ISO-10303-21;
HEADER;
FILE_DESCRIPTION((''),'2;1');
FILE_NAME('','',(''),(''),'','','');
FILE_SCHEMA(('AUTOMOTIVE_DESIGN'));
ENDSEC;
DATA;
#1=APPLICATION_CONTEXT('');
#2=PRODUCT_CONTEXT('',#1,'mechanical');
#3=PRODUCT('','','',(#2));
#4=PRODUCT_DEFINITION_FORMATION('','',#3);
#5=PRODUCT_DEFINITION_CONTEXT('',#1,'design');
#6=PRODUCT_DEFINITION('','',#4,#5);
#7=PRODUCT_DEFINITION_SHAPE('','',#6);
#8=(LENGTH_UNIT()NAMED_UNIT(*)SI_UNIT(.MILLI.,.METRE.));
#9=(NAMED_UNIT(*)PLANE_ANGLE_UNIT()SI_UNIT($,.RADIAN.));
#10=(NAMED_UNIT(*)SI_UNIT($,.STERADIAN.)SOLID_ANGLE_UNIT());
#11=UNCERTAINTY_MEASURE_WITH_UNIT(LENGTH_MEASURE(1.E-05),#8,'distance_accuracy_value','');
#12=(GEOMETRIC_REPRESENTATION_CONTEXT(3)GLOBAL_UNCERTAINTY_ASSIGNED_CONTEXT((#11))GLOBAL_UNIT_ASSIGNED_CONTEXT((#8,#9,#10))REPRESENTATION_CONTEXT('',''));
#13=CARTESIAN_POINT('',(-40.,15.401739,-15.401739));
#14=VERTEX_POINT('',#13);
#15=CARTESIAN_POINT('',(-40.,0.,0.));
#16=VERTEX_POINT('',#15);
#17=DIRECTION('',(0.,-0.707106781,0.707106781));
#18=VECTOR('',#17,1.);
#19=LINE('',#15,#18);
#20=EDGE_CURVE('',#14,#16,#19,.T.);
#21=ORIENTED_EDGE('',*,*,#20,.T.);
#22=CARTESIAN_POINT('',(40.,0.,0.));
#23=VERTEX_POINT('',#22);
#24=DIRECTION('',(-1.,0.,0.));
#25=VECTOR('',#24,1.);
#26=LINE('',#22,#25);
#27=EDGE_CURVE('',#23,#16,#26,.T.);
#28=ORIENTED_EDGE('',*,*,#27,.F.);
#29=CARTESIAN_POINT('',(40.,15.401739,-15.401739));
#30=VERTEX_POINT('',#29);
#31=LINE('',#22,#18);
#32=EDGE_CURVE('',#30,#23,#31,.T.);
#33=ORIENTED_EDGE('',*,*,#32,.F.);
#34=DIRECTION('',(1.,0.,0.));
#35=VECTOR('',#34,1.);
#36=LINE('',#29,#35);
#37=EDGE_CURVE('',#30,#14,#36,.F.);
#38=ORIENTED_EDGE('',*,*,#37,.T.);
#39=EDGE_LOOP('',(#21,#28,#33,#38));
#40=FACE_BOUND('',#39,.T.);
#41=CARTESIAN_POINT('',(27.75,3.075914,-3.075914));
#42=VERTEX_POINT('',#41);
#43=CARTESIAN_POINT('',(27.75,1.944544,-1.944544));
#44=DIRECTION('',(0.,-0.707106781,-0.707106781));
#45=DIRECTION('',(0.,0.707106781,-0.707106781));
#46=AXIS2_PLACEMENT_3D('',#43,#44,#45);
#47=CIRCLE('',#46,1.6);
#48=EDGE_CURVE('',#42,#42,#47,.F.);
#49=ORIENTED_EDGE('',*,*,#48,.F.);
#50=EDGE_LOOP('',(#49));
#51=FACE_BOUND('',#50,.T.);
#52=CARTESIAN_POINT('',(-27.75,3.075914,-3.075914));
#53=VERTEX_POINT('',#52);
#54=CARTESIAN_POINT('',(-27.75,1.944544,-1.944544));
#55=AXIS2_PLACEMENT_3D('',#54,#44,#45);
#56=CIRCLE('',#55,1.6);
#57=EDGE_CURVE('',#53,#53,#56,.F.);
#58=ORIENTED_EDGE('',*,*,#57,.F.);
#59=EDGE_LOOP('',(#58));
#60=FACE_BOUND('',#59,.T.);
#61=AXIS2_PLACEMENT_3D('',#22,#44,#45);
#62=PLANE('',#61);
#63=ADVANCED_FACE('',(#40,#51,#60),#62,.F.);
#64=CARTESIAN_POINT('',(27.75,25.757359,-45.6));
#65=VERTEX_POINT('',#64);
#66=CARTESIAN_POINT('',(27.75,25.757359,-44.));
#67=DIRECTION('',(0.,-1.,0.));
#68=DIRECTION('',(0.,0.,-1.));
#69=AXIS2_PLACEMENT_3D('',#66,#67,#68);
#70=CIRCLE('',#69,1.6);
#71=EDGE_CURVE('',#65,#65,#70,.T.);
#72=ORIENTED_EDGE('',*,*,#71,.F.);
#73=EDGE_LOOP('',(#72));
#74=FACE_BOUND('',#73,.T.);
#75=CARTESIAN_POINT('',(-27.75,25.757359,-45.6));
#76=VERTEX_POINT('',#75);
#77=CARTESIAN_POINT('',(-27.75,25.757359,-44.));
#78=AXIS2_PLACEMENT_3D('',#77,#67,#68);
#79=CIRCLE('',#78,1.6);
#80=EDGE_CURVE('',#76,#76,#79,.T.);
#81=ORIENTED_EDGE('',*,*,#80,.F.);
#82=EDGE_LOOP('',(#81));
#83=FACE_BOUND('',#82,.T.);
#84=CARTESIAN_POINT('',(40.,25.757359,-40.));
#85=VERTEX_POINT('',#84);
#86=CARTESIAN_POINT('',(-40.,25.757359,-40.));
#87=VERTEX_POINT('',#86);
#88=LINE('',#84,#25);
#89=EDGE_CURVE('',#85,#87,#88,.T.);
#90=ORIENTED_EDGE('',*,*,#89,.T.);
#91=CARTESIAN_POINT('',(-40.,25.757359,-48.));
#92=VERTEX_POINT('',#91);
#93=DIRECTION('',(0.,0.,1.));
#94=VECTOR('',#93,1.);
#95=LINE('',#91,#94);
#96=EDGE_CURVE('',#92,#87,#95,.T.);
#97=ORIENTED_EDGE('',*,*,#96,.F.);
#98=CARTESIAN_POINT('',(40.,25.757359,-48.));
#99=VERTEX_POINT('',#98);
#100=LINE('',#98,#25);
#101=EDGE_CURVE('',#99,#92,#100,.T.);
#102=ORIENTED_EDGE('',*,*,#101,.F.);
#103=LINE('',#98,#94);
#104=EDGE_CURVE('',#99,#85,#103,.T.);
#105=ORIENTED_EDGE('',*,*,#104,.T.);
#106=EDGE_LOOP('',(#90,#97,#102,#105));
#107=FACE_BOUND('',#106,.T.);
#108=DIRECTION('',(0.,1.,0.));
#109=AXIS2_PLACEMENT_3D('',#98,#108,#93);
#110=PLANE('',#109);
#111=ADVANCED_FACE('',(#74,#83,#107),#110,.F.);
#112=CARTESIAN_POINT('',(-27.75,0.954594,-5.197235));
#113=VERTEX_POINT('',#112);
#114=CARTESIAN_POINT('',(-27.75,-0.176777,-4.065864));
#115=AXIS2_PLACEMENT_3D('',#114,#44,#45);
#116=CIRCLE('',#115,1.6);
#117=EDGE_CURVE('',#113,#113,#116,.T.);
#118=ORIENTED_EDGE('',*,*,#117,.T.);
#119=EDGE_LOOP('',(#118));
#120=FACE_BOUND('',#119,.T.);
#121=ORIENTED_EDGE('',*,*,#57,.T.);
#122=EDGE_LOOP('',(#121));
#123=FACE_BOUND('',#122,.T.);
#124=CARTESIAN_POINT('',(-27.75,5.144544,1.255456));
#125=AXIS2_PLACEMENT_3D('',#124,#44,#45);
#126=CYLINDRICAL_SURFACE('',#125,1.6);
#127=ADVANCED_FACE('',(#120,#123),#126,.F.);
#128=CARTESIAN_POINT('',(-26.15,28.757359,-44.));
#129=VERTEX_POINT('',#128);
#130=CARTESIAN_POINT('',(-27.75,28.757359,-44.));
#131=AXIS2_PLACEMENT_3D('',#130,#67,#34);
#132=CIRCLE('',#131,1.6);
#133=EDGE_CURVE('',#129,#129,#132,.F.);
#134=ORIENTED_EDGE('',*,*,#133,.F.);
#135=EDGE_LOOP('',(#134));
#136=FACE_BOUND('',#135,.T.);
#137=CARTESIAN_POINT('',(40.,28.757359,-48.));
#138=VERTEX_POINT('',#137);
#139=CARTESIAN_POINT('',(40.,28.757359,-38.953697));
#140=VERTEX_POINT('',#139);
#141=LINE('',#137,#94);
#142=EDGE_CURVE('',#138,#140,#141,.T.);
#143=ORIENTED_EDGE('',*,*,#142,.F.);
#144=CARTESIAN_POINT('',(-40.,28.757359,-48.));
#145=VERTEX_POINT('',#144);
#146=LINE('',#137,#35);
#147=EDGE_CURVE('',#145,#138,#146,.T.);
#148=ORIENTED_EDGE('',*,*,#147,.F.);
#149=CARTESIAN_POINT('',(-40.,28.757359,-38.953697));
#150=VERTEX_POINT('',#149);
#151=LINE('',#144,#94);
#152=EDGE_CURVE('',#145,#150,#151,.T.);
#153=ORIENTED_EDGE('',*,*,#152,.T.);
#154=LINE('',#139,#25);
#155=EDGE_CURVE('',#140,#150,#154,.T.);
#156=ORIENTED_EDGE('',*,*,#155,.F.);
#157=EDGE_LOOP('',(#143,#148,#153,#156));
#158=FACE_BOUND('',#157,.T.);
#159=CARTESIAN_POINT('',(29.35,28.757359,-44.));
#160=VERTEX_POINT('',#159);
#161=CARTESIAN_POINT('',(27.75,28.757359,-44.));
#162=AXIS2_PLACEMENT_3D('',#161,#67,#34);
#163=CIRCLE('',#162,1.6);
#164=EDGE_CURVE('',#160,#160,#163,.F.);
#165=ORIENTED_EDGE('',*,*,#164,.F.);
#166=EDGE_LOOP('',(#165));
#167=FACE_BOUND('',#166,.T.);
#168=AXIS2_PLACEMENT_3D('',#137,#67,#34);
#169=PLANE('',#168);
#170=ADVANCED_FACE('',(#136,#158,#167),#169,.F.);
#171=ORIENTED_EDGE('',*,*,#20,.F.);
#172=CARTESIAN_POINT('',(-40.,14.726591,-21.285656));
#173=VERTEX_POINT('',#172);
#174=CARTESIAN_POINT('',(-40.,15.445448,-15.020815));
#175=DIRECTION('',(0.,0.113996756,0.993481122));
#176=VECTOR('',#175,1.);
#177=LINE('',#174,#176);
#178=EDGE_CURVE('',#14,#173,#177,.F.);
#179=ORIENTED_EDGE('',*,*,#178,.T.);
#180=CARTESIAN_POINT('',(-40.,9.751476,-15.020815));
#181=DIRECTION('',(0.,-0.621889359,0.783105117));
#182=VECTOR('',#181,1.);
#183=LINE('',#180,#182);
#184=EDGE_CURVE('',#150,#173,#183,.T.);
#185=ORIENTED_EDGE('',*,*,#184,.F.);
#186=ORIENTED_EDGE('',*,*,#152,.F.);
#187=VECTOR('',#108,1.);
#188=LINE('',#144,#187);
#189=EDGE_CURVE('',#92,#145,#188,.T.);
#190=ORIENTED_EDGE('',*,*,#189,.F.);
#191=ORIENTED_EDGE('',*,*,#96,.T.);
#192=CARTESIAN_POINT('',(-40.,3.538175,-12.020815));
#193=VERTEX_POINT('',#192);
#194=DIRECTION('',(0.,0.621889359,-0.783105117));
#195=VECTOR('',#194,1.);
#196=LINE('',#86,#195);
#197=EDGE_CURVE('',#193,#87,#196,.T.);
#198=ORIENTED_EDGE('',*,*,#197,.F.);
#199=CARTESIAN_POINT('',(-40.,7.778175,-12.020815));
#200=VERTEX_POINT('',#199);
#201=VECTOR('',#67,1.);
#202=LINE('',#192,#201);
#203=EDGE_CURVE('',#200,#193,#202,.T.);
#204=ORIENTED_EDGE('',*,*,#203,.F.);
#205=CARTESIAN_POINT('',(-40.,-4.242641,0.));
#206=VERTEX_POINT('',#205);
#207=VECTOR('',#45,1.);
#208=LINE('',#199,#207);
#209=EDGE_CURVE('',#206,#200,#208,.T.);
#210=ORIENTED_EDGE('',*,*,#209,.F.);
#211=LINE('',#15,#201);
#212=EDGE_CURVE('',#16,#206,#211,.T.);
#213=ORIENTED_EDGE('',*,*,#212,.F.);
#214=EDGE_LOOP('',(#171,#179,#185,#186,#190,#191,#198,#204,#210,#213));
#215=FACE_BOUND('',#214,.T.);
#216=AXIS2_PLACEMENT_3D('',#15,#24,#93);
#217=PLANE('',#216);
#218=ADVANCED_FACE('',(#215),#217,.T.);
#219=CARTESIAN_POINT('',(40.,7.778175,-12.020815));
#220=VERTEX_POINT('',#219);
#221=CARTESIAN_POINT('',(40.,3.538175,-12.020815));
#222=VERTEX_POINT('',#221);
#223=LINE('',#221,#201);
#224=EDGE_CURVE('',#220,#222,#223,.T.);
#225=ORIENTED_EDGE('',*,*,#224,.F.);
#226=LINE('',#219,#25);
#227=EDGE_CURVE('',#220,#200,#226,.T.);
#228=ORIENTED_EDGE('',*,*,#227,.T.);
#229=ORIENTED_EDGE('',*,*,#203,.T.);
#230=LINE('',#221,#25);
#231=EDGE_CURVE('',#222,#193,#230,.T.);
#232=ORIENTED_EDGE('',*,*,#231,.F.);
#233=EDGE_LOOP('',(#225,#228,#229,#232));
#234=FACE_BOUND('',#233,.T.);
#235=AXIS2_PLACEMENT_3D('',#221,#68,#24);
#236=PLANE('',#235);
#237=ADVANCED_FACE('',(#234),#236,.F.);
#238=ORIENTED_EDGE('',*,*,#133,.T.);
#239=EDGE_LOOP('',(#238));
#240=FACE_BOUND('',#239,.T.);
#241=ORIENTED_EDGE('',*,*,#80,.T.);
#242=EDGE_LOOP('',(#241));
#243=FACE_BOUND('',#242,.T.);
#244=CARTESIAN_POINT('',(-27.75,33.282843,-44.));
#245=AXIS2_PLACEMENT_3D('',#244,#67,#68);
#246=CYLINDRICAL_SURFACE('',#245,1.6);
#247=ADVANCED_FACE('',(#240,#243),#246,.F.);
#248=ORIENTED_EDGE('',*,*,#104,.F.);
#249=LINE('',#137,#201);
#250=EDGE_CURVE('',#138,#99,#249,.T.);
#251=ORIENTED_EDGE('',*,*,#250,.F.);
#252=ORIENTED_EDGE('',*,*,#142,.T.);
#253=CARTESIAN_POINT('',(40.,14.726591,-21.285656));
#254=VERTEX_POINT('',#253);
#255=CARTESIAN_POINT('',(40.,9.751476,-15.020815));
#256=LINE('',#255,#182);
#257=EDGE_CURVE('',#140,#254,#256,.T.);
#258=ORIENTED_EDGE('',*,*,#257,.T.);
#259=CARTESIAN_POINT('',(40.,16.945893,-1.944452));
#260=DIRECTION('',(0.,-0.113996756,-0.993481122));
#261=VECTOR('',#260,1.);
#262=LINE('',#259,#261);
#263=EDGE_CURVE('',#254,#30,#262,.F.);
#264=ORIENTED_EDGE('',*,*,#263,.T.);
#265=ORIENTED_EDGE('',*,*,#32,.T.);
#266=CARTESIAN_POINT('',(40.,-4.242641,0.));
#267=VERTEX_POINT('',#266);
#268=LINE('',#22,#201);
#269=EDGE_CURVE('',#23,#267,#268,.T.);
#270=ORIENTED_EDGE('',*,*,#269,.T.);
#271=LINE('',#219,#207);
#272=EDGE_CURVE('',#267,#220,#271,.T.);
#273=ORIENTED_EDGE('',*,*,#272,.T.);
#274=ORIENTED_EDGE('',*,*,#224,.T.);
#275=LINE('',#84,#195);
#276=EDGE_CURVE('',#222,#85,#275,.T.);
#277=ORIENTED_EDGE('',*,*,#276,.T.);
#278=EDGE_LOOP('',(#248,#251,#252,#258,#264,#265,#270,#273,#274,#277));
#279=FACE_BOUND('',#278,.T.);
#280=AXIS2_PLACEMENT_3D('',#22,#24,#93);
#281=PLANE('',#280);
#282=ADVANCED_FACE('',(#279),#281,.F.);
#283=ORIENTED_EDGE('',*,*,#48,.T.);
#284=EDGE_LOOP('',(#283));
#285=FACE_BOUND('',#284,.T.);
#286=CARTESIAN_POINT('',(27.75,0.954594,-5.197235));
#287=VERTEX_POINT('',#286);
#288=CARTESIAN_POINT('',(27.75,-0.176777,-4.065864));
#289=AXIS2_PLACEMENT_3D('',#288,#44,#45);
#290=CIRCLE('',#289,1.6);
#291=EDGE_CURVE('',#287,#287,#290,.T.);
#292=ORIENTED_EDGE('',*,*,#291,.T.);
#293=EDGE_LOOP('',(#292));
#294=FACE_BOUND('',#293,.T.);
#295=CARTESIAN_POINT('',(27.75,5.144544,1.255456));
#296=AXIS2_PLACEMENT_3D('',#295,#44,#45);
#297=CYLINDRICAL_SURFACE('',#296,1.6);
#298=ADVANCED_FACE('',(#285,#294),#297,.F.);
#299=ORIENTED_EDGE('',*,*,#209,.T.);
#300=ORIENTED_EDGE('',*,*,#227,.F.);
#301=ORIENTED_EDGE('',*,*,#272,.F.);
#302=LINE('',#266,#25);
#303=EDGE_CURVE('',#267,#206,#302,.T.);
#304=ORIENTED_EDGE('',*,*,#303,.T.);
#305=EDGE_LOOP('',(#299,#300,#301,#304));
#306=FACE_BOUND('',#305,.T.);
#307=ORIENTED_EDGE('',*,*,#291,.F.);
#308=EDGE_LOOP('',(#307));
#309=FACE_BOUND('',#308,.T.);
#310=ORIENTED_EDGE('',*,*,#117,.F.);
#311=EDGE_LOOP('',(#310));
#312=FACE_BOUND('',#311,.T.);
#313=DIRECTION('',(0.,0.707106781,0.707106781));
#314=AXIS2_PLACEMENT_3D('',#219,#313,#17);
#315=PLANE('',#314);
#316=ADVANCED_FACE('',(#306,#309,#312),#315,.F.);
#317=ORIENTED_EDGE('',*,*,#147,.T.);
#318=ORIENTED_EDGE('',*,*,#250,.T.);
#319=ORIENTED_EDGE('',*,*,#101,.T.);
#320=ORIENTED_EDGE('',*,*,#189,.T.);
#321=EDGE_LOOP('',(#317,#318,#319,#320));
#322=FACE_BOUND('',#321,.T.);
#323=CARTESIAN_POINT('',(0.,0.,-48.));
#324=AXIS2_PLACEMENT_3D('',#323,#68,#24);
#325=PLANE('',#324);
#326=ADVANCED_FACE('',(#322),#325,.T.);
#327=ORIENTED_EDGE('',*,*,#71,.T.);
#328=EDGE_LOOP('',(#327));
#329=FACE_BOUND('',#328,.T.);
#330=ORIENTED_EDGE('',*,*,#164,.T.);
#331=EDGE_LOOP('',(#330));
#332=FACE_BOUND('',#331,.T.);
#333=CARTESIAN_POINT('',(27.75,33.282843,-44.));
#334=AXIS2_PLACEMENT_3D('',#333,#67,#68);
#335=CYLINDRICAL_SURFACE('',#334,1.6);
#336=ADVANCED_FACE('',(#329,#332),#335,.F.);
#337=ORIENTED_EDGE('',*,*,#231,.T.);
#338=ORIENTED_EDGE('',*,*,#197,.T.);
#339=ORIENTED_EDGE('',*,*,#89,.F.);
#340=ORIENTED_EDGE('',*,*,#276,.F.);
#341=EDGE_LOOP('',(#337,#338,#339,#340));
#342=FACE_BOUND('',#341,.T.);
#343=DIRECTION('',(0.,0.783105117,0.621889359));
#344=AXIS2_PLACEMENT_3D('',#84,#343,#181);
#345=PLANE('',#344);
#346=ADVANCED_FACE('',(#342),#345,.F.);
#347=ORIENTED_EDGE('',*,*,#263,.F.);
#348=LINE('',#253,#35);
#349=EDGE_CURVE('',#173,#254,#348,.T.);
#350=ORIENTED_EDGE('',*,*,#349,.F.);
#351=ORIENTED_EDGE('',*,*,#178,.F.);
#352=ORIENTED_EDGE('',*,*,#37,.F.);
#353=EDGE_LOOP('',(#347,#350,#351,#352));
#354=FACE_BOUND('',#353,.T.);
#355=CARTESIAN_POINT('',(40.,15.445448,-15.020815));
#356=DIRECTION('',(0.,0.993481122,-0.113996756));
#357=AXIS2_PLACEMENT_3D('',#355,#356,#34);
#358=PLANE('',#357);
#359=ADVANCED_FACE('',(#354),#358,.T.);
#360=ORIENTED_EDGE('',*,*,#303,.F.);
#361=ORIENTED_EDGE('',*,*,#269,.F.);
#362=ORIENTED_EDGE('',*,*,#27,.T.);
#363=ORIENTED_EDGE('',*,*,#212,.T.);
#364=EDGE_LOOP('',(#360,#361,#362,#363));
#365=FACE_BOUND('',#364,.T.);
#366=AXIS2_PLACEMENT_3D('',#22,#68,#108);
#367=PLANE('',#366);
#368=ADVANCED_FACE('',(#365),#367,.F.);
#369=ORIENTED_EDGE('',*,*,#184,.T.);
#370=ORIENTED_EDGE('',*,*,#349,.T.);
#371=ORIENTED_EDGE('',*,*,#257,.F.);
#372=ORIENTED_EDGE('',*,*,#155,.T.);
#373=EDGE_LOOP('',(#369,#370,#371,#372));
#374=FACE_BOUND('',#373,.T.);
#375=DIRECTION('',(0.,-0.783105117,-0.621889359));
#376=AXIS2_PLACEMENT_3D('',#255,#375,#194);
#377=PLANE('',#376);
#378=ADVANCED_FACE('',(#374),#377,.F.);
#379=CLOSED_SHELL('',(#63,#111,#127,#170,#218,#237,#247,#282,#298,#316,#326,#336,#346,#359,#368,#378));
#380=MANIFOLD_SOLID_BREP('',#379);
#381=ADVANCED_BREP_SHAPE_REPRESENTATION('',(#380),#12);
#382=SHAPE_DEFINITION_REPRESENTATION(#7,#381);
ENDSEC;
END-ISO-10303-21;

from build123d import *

# Parameters (mm, degrees)
BOSS_EXTRUDE1_DEPTH = 40
SKETCH2_R           = 1.6
CUT_EXTRUDE1_DEPTH  = 3
SKETCH3_W           = 80
SKETCH3_H           = 3
BOSS_EXTRUDE2_DEPTH = 8
SKETCH4_W           = 80
SKETCH4_H           = 0.830903327
CUT_EXTRUDE2_DEPTH  = 64.839370972
CHAMFER1_SIZE       = 5.693972562
CHAMFER1_SIZE_2     = 8
SKETCH5_R           = 1.6
CUT_EXTRUDE3_DEPTH  = 3


with BuildPart() as part:
    # Sketch1 → Boss-Extrude1 (new, symmetric)
    with BuildSketch(Plane(origin=(0, 0, 0), x_dir=(0, 0, -1), z_dir=(1, 0, 0))):
        Polygon((0, 0), (0, -4.242640687), (12.02081528, 7.778174593), (12.02081528, 3.538174593), (40, 25.757359313), (40, 29.58826264), (15.02081528, 9.751475936), (15.02081528, 15.02081528), align=None)
    extrude(amount=BOSS_EXTRUDE1_DEPTH, both=True)

    # Sketch2 → Cut-Extrude1 (cut)
    with BuildSketch(Plane(origin=(0, -2.121320344, -2.121320344), x_dir=(1, 0, 0), z_dir=(0, -0.7071067811865513, -0.7071067811865438))):
        with Locations(Location((-27.75, -2.75, 0), (0, 0, 270))):
            Circle(SKETCH2_R)
        with Locations(Location((27.75, -2.75, 0), (0, 0, 270))):
            Circle(SKETCH2_R)
    extrude(amount=-CUT_EXTRUDE1_DEPTH, mode=Mode.SUBTRACT)

    # Sketch3 → Boss-Extrude2 (add)
    with BuildSketch(Plane(origin=(0, 0, -40), x_dir=(-1, 0, 0), z_dir=(0, 0, -1))):
        with Locations((0, 27.257359313)):
            Rectangle(SKETCH3_W, SKETCH3_H)
    extrude(amount=BOSS_EXTRUDE2_DEPTH)

    # Sketch4 → Cut-Extrude2 (cut, through all)
    with BuildSketch(Plane(origin=(0, 0, -40), x_dir=(-1, 0, 0), z_dir=(0, 0, -1))):
        with Locations((0, 29.172810977)):
            Rectangle(SKETCH4_W, SKETCH4_H)
    extrude(amount=-CUT_EXTRUDE2_DEPTH, mode=Mode.SUBTRACT)

    # Chamfer1
    # the kernel refuses this chamfer: 8, 5.693972562 mm, written as the material it adds along each edge
    with BuildSketch(Plane(origin=(40, 9.751475936, -15.02081528), x_dir=(0, 0.9984646393058687, 0.05539281592229428), z_dir=(-1, 0, 0))) as chamfer1_piece_1_section:
        Polygon((CHAMFER1_SIZE * 0.998464639351, CHAMFER1_SIZE * 0.0553928159248), (CHAMFER1_SIZE_2 * 0.577556137161, CHAMFER1_SIZE_2 * 0.816350971352), (0, 0), align=None)
    chamfer1_piece_1 = extrude(amount=80, mode=Mode.PRIVATE)
    chamfer1_piece_1 = split(chamfer1_piece_1, bisect_by=Plane(origin=(0, 15.189171508, -15.189171508), z_dir=(0, -0.7071067811865511, -0.7071067811865441)), keep=Keep.TOP, mode=Mode.PRIVATE)
    add(chamfer1_piece_1)

    # Sketch5 → Cut-Extrude3 (cut)
    with BuildSketch(Plane.XZ.offset(-25.757359313)):
        with Locations(Location((-27.75, -44, 0), (0, 0, 270))):
            Circle(SKETCH5_R)
        with Locations(Location((27.75, -44, 0), (0, 0, 270))):
            Circle(SKETCH5_R)
    extrude(amount=-CUT_EXTRUDE3_DEPTH, mode=Mode.SUBTRACT)


solid = part.part
